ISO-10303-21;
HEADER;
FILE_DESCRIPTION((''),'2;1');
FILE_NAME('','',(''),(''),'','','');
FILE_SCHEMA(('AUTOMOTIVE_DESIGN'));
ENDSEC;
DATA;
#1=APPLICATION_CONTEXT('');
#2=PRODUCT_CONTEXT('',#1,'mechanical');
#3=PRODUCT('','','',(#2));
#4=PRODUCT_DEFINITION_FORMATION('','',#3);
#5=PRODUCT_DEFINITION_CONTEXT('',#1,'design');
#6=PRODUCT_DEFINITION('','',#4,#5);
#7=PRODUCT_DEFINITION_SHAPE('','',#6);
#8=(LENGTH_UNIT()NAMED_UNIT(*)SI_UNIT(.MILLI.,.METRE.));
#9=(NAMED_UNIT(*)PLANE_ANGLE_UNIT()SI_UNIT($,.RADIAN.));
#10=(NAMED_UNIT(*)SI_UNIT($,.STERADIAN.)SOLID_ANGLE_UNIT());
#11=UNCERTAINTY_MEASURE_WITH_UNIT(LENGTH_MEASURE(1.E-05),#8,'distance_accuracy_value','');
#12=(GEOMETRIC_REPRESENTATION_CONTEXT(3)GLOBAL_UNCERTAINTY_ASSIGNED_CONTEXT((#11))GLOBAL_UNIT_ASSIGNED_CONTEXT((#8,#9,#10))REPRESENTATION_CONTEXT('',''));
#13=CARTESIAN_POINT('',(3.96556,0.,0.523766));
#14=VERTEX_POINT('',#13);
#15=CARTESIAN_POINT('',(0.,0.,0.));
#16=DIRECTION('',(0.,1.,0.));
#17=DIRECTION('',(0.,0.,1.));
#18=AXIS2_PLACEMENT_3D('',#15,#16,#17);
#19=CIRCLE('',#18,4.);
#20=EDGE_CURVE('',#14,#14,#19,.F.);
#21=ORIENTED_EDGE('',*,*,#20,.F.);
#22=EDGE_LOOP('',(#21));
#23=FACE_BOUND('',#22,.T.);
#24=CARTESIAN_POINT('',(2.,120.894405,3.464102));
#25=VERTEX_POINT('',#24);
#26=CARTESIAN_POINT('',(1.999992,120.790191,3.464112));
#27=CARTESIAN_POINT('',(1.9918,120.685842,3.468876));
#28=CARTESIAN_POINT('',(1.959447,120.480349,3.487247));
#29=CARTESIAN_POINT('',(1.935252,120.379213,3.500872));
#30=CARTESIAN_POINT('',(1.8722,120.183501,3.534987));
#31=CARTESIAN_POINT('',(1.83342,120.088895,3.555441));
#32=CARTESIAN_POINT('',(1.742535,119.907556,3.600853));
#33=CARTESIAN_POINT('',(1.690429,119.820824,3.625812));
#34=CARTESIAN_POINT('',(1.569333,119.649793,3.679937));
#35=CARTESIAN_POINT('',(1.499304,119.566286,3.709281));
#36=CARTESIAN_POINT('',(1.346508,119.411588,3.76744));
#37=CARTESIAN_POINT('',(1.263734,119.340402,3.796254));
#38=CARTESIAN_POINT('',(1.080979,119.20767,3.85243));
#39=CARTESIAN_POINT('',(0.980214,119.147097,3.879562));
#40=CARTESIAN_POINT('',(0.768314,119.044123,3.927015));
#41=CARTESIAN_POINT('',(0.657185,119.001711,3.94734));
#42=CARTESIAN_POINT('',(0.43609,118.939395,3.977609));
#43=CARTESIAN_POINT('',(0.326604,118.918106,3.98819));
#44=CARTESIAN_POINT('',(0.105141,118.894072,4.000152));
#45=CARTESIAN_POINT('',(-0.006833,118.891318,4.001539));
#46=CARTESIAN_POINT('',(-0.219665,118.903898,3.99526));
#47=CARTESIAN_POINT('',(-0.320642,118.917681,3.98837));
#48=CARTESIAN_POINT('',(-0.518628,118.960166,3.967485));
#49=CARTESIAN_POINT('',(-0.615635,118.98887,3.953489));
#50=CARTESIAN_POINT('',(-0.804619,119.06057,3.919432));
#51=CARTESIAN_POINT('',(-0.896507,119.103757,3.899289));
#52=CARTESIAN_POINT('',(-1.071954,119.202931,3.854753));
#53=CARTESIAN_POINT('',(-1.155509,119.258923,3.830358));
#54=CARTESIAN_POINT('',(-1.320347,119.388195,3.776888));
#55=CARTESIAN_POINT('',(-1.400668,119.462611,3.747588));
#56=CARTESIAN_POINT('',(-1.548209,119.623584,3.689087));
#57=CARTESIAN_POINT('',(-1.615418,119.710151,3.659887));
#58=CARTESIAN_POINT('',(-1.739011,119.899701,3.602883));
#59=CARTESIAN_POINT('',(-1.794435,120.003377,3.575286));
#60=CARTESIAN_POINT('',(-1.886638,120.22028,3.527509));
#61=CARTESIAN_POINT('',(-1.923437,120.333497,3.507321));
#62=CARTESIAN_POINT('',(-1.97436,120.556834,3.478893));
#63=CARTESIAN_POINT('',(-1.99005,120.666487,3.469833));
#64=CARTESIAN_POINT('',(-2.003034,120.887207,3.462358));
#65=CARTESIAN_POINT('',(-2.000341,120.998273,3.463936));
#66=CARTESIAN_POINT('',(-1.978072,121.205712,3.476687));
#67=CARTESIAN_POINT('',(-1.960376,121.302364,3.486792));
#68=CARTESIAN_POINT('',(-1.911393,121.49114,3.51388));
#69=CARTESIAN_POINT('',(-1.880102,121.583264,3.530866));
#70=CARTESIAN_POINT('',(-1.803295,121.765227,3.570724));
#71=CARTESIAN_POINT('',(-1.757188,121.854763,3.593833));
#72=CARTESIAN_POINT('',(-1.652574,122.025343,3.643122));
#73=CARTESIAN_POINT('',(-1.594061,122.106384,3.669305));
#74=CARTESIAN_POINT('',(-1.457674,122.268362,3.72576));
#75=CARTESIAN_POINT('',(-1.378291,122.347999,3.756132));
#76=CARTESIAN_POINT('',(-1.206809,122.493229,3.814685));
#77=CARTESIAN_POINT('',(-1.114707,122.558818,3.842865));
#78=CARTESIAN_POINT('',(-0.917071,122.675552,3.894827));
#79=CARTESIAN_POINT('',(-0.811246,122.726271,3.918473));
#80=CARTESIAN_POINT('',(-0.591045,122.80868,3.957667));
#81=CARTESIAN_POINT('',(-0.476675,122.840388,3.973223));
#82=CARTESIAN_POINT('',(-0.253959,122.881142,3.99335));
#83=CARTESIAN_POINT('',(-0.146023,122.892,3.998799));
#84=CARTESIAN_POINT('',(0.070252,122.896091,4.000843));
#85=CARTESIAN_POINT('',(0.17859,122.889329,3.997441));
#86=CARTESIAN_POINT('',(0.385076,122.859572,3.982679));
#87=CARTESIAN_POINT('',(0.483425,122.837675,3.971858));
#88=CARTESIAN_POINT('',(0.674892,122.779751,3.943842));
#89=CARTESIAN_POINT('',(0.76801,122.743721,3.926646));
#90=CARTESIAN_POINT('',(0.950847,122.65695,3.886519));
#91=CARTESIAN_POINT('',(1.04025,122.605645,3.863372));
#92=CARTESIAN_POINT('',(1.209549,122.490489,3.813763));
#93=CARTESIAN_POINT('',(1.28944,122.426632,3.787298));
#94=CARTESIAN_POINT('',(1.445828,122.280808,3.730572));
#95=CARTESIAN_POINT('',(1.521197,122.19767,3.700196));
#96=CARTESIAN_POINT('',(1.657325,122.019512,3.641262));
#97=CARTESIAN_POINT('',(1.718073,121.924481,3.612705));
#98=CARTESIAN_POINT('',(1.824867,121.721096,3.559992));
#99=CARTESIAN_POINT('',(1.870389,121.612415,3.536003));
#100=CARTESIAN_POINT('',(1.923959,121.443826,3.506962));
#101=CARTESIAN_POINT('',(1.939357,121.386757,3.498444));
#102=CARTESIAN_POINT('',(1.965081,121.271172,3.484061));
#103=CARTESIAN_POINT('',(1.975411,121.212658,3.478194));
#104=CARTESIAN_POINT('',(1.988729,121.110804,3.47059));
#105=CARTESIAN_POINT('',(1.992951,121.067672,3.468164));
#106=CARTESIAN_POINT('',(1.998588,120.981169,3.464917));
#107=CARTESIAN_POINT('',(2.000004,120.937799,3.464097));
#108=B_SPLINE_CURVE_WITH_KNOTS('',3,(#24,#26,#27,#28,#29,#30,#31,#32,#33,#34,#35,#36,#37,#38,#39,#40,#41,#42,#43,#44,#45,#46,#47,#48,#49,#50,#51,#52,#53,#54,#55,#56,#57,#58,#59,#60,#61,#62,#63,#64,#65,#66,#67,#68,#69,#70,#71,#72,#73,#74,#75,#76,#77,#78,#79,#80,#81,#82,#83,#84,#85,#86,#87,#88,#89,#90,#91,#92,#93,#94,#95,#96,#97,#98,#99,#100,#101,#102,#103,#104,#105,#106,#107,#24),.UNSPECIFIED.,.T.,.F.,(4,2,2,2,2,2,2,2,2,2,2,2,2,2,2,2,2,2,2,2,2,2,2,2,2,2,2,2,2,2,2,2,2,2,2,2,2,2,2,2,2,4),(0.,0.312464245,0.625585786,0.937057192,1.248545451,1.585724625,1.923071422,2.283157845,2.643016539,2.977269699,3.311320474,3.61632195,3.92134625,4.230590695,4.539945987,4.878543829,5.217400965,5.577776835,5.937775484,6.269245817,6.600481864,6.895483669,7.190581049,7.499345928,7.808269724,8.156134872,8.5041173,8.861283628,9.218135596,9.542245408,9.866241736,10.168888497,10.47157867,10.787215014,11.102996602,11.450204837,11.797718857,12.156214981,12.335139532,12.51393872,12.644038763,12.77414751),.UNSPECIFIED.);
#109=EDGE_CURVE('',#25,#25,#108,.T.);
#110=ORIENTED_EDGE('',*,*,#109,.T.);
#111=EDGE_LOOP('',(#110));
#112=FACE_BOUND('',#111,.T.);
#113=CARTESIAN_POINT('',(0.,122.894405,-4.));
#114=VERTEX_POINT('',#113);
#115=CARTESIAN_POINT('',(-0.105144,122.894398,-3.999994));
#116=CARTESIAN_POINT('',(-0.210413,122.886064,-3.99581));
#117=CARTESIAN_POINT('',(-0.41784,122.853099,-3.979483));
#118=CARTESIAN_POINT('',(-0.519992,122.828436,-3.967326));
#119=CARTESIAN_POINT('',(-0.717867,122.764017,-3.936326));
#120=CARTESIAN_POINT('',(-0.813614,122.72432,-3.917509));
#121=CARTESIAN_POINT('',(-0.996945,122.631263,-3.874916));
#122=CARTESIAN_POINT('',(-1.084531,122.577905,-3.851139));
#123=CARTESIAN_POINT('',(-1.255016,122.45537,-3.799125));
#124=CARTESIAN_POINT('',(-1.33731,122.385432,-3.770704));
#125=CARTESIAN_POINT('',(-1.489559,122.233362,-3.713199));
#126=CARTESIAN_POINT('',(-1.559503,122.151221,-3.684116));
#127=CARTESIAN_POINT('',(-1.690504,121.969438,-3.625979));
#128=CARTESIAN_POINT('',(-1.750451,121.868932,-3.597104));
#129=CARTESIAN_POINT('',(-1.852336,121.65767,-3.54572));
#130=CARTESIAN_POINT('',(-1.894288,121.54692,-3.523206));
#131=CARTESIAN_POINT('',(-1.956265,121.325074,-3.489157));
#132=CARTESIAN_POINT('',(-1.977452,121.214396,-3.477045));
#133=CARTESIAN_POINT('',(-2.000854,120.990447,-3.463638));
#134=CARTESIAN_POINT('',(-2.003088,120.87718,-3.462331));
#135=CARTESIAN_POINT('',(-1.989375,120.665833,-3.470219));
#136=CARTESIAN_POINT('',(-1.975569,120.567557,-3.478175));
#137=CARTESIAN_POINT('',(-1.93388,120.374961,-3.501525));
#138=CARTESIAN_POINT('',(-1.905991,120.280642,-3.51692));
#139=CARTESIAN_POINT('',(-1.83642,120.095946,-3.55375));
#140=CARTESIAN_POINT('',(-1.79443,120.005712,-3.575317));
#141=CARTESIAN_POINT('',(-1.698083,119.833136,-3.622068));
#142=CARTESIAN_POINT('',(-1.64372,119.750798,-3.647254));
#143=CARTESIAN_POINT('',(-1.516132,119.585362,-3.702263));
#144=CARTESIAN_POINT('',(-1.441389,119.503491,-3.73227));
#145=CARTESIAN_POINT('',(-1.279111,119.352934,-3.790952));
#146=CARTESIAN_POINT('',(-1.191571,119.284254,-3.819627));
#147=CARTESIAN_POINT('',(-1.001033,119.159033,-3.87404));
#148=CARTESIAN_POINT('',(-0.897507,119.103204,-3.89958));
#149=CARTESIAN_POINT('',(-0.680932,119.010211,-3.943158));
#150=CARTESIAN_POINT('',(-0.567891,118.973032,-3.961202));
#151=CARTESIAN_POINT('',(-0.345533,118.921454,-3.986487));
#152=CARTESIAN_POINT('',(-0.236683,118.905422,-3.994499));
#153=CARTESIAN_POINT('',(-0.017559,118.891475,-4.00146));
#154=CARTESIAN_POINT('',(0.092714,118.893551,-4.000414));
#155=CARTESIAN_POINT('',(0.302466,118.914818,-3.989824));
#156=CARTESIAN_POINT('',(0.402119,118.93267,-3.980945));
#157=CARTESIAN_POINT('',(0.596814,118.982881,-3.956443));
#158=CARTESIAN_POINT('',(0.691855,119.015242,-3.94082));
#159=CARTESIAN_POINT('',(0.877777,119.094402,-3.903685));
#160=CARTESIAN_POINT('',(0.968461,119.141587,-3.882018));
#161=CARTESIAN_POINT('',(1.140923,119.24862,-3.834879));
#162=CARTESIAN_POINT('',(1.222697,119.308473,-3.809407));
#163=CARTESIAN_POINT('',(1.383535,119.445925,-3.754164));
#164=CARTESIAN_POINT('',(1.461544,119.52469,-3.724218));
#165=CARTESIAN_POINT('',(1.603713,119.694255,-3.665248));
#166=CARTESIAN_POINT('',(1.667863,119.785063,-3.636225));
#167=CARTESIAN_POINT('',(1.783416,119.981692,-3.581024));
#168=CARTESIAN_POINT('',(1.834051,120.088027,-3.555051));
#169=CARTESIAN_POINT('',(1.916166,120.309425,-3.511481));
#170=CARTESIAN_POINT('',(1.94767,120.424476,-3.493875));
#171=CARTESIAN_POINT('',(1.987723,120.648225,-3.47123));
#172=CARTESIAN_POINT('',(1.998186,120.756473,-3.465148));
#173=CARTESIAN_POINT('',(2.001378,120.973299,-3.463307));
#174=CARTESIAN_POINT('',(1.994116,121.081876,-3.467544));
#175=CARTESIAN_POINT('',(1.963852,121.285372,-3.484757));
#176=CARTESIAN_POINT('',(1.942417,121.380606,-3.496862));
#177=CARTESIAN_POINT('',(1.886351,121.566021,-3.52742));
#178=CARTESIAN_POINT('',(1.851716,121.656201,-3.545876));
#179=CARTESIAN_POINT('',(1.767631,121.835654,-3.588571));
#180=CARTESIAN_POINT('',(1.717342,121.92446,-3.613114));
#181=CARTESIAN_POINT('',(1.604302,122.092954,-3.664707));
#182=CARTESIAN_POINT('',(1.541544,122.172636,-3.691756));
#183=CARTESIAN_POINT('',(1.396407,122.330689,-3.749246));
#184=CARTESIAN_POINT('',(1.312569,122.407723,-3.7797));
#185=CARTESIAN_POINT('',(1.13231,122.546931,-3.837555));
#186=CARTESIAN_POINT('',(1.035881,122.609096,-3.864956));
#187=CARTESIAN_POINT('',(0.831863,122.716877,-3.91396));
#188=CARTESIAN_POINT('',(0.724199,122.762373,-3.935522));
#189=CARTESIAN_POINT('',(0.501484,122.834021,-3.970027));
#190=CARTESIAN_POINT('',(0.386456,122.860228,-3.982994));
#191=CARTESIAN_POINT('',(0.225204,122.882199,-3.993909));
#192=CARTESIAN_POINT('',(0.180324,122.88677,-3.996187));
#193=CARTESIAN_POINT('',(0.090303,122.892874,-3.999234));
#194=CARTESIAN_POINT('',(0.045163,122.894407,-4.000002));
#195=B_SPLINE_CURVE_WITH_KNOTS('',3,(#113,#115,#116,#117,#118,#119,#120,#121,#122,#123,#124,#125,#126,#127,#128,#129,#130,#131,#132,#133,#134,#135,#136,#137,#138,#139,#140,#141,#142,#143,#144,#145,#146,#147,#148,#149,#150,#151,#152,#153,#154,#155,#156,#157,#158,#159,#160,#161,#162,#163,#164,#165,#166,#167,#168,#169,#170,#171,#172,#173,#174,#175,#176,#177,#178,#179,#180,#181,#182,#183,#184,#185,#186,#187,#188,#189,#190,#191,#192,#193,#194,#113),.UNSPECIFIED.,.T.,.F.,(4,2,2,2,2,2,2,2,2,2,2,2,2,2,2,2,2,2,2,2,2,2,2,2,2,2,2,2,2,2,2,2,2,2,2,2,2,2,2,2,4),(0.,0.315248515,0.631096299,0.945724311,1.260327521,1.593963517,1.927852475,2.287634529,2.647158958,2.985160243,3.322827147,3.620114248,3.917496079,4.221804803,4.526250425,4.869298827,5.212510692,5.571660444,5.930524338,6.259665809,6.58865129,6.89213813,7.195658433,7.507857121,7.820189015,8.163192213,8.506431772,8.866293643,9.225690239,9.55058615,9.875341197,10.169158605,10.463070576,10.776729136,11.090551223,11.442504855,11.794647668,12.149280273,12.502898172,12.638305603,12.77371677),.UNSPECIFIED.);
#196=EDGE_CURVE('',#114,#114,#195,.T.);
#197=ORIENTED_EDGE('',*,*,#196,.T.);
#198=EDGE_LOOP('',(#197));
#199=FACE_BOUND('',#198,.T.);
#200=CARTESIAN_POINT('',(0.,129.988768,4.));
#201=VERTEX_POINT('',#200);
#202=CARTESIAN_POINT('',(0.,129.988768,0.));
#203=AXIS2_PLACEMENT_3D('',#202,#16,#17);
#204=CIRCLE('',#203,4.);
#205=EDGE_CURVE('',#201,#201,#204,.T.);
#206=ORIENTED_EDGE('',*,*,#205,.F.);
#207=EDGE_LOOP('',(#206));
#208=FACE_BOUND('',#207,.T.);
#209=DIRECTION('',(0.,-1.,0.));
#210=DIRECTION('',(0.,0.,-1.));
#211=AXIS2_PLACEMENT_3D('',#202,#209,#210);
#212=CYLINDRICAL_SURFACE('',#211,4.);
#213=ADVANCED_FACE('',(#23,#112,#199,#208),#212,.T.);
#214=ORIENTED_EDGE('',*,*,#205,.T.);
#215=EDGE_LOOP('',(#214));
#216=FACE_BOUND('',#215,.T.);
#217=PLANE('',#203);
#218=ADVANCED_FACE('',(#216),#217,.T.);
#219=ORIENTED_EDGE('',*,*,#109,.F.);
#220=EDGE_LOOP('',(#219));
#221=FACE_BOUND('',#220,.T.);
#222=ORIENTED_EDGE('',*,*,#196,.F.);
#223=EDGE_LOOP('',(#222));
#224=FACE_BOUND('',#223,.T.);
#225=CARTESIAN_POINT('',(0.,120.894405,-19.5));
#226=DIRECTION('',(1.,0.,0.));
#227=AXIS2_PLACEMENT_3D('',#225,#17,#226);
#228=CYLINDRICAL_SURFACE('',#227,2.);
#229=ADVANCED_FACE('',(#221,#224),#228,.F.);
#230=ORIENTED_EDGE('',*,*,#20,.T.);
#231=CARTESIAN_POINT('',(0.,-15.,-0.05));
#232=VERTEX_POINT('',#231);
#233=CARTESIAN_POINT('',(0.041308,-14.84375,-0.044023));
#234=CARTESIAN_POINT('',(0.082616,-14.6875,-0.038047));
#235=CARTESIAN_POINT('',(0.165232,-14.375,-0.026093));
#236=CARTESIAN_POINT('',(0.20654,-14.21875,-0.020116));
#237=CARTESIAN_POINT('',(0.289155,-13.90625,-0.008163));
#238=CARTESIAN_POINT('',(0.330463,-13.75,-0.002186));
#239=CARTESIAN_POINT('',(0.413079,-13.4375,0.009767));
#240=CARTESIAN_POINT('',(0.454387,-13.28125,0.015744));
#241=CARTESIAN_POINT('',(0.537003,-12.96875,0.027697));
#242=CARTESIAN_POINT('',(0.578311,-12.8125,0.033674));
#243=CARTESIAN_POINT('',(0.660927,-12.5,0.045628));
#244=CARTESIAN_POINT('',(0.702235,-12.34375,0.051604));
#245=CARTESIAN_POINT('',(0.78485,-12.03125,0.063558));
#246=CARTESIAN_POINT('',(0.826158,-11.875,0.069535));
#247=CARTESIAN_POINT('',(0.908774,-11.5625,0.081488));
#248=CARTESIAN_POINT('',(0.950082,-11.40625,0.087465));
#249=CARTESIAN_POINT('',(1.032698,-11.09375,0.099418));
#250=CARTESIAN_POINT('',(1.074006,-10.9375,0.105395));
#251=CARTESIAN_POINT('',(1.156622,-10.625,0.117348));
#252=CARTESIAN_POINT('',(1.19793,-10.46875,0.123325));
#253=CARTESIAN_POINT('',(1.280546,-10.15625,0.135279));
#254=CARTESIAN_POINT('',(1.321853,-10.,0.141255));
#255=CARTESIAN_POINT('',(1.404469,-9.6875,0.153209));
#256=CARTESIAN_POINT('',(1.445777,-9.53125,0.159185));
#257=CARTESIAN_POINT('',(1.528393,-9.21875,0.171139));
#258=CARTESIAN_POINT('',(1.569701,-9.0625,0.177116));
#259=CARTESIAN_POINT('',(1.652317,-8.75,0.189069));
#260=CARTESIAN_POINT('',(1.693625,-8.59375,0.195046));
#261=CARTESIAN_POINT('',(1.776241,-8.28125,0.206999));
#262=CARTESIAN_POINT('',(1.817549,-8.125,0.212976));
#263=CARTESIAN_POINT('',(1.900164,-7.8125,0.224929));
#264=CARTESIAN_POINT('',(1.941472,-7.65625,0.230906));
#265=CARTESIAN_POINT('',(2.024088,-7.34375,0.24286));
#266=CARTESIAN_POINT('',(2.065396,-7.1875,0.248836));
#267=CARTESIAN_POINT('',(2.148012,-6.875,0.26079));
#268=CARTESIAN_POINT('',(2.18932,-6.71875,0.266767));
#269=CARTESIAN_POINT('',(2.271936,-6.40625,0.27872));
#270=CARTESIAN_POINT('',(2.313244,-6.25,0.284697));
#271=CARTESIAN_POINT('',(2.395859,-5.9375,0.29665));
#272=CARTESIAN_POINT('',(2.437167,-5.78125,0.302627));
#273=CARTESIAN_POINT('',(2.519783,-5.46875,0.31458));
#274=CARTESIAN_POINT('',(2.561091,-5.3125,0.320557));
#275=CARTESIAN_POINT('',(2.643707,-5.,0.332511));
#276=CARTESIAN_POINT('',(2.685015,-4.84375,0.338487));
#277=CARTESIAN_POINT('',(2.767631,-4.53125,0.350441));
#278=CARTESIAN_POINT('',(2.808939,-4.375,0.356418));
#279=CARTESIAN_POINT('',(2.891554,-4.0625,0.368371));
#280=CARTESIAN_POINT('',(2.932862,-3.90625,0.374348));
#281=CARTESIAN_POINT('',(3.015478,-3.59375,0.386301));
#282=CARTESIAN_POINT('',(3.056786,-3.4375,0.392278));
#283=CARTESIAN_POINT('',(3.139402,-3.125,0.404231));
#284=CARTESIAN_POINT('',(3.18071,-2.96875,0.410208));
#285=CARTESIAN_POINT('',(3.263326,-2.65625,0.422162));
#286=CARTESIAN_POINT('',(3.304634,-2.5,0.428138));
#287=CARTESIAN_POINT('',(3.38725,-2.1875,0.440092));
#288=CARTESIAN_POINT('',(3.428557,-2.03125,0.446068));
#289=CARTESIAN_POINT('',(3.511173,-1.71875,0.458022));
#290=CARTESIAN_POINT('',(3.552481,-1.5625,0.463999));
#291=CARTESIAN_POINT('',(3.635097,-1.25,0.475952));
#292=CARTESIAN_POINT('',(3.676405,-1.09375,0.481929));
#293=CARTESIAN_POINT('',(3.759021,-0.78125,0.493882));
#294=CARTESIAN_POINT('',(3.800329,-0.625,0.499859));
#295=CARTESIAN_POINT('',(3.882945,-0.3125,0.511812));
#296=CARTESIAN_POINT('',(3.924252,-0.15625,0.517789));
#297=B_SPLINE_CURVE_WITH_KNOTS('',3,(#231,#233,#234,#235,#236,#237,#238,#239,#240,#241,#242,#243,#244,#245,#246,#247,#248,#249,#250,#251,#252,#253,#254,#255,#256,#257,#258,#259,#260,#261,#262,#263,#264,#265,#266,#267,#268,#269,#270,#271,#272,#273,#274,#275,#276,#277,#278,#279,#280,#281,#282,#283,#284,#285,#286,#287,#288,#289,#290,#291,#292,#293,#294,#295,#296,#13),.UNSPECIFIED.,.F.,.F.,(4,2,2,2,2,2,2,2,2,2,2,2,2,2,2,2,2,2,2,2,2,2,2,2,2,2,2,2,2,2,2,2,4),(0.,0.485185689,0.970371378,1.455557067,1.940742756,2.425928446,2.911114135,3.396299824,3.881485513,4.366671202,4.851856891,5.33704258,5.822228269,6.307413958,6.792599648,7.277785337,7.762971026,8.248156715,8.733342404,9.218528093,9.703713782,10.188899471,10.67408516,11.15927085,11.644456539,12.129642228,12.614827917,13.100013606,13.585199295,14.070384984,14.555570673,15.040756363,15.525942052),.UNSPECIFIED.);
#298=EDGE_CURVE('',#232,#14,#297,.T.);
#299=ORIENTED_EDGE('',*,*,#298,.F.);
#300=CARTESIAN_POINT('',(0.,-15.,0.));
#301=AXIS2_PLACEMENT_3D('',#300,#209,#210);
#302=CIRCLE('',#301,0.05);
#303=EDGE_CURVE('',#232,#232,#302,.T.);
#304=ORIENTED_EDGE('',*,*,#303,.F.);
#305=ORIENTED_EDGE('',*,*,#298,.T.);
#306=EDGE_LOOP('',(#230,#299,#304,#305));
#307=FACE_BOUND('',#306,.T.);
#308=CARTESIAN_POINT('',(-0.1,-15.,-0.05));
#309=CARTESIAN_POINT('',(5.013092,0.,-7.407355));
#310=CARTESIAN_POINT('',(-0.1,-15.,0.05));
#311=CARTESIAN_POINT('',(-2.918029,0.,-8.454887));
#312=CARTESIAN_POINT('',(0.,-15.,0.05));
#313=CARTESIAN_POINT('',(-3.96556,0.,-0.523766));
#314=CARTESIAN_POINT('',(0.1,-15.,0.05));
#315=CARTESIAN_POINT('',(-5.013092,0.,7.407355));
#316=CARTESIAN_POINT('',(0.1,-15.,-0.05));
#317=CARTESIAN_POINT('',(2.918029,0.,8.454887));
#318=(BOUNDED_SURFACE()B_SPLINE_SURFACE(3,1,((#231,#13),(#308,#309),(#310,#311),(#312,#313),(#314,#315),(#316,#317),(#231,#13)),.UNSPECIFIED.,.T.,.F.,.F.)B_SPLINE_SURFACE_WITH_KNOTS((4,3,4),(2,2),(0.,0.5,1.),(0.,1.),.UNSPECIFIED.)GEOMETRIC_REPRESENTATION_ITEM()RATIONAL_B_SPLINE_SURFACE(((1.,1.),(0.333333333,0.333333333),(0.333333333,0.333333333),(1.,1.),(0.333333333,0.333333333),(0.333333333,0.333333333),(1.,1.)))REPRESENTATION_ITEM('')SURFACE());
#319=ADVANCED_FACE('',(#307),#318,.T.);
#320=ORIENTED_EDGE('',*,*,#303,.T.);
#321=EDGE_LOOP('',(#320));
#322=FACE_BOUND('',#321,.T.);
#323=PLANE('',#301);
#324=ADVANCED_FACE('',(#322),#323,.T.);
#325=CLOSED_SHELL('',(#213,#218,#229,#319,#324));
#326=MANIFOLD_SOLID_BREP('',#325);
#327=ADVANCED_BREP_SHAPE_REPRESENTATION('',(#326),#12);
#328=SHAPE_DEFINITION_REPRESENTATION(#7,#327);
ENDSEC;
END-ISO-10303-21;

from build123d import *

# Parameters (mm, degrees)
SKETCH1_R           = 4
BOSS_EXTRUDE1_DEPTH = 129.988767867
SKETCH3_R           = 2
CUT_EXTRUDE1_DEPTH  = 19.5


with BuildPart() as part:
    # Sketch1 → Boss-Extrude1 (new body)
    with BuildSketch(Plane(origin=(0, 0, 0), x_dir=(1, 0, 0), z_dir=(0, 1, 0))):
        with Locations(Location((0, 0, 0), (0, 0, 270))):
            Circle(SKETCH1_R)
    extrude(amount=BOSS_EXTRUDE1_DEPTH)

    # Loft1: read off the stored shape, not the designer's step
    # Loft1: loft between two sections, ruled curve by curve
    loft1_from = [
        Edge.make_bspline([(0, -15, -0.05), (-0.1, -15, -0.05), (-0.1, -15, 0.05), (0, -15, 0.05), (0.1, -15, 0.05), (0.1, -15, -0.05), (0, -15, -0.05)], [0, 0, 0, 0, 0.5, 0.5, 0.5, 1, 1, 1, 1], 3, [1, 0.333333333, 0.333333333, 1, 0.333333333, 0.333333333, 1]),
    ]
    loft1_to = [
        Edge.make_bspline([(3.965560399, 0, 0.523765905), (5.013092209, 0, -7.407354893), (-2.918028589, 0, -8.454886703), (-3.965560399, 0, -0.523765905), (-5.013092209, 0, 7.407354893), (2.918028589, 0, 8.454886703), (3.965560399, 0, 0.523765905)], [0, 0, 0, 0, 0.5, 0.5, 0.5, 1, 1, 1, 1], 3, [1, 0.333333333, 0.333333333, 1, 0.333333333, 0.333333333, 1]),
    ]
    loft1 = Solid(Shell([*[Face.make_surface_from_curves(loft1_from[k], loft1_to[k]) for k in range(1)], Face(Wire(loft1_from)), Face(Wire(loft1_to))]))
    add(loft1)

    # Sketch3 → Cut-Extrude1 (cut, symmetric)
    with BuildSketch(Plane.XY):
        with Locations((0, 120.894404614)):
            Circle(SKETCH3_R)
    extrude(amount=CUT_EXTRUDE1_DEPTH, both=True, mode=Mode.SUBTRACT)


solid = part.part
